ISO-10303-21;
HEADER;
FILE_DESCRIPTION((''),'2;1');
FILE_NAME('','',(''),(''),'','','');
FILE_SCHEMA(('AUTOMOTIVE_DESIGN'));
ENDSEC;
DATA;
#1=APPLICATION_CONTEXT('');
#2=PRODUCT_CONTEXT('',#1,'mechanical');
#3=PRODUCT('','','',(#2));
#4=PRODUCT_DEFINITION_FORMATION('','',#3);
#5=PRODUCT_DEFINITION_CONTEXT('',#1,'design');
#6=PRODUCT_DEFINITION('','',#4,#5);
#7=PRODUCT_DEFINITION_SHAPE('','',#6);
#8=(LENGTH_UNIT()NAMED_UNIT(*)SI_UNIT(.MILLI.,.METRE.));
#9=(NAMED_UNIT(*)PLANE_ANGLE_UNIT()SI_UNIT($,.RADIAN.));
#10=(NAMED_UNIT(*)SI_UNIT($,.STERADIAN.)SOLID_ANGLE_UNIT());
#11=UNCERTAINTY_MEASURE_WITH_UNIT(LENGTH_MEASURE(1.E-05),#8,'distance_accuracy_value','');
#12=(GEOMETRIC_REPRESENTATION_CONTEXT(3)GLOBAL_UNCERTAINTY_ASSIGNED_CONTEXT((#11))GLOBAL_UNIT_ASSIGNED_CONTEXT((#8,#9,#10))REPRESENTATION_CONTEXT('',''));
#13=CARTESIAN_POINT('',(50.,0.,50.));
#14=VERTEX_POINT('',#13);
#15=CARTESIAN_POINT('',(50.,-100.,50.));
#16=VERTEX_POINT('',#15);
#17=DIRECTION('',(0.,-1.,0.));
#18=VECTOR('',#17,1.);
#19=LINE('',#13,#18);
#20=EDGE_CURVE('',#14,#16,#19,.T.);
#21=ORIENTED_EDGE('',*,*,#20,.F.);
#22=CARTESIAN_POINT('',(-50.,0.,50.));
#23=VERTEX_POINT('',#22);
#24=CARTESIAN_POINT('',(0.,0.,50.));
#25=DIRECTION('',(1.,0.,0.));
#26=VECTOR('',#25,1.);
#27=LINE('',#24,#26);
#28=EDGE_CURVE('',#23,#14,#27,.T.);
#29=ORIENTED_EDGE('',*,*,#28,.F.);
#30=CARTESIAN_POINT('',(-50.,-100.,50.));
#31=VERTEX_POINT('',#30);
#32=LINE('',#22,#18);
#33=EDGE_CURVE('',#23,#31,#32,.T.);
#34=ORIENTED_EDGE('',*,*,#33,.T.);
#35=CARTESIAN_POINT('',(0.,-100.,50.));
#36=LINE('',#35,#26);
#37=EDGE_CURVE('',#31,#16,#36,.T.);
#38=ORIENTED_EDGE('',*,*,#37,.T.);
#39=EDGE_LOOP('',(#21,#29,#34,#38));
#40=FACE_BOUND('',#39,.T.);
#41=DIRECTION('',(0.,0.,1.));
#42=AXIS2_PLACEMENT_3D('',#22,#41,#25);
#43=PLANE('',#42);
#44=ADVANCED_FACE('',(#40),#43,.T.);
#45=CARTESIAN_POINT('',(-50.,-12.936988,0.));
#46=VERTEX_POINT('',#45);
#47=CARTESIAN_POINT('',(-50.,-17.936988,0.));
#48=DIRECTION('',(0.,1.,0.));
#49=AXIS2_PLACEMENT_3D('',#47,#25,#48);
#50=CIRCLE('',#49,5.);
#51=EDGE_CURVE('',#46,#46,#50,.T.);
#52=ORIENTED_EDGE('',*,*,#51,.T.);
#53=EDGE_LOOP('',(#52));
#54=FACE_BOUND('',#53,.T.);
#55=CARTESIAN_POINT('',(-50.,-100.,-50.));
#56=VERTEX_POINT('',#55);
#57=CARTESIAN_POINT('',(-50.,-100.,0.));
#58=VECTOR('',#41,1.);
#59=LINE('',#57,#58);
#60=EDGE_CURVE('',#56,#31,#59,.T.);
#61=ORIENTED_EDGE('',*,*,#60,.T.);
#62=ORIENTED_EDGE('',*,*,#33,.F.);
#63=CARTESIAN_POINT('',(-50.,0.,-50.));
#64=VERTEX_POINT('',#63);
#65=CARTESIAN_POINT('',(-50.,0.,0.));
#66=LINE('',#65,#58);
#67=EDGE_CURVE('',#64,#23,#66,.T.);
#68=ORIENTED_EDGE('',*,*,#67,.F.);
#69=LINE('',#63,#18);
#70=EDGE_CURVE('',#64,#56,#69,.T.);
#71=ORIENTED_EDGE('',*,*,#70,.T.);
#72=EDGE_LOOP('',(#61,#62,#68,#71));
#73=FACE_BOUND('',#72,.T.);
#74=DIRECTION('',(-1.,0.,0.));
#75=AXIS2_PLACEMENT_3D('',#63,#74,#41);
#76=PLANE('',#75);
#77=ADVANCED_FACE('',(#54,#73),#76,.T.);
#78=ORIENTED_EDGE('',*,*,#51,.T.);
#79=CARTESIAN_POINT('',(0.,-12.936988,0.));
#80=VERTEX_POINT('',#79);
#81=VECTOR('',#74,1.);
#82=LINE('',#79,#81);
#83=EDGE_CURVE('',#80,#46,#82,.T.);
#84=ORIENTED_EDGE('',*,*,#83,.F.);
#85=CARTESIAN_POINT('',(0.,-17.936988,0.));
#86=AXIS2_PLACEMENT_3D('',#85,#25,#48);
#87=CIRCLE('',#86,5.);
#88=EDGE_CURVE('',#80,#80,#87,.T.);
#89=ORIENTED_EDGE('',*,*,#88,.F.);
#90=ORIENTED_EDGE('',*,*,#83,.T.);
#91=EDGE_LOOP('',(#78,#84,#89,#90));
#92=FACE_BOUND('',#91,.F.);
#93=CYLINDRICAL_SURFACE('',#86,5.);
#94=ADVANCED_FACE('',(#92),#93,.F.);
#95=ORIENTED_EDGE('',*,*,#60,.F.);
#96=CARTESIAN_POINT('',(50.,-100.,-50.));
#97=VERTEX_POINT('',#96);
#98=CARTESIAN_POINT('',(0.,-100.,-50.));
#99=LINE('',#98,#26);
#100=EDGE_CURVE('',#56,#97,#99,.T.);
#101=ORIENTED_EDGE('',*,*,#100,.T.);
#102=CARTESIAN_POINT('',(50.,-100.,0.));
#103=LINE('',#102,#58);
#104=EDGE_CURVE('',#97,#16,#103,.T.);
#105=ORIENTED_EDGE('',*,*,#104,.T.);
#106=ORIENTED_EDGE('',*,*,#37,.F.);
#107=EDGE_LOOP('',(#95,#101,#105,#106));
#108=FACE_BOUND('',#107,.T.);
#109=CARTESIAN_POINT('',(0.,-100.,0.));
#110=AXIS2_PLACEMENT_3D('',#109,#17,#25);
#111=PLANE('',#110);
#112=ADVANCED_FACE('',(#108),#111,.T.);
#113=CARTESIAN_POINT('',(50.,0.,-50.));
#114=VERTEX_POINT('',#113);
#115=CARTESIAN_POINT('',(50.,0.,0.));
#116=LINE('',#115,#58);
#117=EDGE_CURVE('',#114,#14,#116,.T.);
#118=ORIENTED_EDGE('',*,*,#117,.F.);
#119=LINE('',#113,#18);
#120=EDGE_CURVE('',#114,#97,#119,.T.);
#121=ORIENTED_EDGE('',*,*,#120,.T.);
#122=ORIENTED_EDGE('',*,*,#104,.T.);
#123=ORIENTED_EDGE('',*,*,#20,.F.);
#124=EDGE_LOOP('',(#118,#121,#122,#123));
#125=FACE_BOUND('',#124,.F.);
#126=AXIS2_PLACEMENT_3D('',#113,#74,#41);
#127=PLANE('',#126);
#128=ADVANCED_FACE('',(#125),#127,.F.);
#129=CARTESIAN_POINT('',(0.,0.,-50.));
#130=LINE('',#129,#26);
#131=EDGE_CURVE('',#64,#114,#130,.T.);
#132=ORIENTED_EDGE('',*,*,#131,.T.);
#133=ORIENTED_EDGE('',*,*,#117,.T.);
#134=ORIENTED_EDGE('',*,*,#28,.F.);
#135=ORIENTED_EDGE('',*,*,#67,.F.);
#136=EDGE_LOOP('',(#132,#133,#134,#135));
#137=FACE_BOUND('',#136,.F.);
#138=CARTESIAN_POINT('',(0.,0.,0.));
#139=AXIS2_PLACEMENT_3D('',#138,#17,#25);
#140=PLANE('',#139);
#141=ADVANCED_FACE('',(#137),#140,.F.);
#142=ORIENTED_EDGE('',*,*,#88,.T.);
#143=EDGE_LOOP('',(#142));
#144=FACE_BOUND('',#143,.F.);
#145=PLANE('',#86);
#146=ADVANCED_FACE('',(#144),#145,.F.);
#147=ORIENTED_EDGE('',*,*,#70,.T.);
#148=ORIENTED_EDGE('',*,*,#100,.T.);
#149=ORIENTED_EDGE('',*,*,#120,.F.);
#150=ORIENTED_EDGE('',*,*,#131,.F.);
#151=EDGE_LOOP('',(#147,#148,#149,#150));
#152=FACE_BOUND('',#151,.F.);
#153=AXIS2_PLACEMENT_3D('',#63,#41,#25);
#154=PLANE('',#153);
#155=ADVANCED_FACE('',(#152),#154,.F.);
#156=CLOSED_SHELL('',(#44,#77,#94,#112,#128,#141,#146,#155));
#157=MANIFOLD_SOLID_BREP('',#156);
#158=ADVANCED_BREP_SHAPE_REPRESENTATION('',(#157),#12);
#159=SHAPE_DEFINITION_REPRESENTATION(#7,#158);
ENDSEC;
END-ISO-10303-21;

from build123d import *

# Parameters (mm, degrees)
F0_W     = 100
F0_H     = 100
F1_DEPTH = 100
F6_R     = 5
F7_DEPTH = 50.001


# Not quite as in the source:
# - a feature of the source that left no trace in its solid (it failed there, or was rolled back) is left out


with BuildPart() as f1:
    # F0 (on Front) → F1 (new body)
    with BuildSketch(Plane.XZ):
        Rectangle(F0_W, F0_H)
    extrude(amount=F1_DEPTH)

    # F6 (on Right) → F7 (cut, through all)
    with BuildSketch(Plane.YZ):
        with Locations((-17.9369883015, 0)):
            Circle(F6_R)
    extrude(amount=-F7_DEPTH, mode=Mode.SUBTRACT)


solid = f1.part
